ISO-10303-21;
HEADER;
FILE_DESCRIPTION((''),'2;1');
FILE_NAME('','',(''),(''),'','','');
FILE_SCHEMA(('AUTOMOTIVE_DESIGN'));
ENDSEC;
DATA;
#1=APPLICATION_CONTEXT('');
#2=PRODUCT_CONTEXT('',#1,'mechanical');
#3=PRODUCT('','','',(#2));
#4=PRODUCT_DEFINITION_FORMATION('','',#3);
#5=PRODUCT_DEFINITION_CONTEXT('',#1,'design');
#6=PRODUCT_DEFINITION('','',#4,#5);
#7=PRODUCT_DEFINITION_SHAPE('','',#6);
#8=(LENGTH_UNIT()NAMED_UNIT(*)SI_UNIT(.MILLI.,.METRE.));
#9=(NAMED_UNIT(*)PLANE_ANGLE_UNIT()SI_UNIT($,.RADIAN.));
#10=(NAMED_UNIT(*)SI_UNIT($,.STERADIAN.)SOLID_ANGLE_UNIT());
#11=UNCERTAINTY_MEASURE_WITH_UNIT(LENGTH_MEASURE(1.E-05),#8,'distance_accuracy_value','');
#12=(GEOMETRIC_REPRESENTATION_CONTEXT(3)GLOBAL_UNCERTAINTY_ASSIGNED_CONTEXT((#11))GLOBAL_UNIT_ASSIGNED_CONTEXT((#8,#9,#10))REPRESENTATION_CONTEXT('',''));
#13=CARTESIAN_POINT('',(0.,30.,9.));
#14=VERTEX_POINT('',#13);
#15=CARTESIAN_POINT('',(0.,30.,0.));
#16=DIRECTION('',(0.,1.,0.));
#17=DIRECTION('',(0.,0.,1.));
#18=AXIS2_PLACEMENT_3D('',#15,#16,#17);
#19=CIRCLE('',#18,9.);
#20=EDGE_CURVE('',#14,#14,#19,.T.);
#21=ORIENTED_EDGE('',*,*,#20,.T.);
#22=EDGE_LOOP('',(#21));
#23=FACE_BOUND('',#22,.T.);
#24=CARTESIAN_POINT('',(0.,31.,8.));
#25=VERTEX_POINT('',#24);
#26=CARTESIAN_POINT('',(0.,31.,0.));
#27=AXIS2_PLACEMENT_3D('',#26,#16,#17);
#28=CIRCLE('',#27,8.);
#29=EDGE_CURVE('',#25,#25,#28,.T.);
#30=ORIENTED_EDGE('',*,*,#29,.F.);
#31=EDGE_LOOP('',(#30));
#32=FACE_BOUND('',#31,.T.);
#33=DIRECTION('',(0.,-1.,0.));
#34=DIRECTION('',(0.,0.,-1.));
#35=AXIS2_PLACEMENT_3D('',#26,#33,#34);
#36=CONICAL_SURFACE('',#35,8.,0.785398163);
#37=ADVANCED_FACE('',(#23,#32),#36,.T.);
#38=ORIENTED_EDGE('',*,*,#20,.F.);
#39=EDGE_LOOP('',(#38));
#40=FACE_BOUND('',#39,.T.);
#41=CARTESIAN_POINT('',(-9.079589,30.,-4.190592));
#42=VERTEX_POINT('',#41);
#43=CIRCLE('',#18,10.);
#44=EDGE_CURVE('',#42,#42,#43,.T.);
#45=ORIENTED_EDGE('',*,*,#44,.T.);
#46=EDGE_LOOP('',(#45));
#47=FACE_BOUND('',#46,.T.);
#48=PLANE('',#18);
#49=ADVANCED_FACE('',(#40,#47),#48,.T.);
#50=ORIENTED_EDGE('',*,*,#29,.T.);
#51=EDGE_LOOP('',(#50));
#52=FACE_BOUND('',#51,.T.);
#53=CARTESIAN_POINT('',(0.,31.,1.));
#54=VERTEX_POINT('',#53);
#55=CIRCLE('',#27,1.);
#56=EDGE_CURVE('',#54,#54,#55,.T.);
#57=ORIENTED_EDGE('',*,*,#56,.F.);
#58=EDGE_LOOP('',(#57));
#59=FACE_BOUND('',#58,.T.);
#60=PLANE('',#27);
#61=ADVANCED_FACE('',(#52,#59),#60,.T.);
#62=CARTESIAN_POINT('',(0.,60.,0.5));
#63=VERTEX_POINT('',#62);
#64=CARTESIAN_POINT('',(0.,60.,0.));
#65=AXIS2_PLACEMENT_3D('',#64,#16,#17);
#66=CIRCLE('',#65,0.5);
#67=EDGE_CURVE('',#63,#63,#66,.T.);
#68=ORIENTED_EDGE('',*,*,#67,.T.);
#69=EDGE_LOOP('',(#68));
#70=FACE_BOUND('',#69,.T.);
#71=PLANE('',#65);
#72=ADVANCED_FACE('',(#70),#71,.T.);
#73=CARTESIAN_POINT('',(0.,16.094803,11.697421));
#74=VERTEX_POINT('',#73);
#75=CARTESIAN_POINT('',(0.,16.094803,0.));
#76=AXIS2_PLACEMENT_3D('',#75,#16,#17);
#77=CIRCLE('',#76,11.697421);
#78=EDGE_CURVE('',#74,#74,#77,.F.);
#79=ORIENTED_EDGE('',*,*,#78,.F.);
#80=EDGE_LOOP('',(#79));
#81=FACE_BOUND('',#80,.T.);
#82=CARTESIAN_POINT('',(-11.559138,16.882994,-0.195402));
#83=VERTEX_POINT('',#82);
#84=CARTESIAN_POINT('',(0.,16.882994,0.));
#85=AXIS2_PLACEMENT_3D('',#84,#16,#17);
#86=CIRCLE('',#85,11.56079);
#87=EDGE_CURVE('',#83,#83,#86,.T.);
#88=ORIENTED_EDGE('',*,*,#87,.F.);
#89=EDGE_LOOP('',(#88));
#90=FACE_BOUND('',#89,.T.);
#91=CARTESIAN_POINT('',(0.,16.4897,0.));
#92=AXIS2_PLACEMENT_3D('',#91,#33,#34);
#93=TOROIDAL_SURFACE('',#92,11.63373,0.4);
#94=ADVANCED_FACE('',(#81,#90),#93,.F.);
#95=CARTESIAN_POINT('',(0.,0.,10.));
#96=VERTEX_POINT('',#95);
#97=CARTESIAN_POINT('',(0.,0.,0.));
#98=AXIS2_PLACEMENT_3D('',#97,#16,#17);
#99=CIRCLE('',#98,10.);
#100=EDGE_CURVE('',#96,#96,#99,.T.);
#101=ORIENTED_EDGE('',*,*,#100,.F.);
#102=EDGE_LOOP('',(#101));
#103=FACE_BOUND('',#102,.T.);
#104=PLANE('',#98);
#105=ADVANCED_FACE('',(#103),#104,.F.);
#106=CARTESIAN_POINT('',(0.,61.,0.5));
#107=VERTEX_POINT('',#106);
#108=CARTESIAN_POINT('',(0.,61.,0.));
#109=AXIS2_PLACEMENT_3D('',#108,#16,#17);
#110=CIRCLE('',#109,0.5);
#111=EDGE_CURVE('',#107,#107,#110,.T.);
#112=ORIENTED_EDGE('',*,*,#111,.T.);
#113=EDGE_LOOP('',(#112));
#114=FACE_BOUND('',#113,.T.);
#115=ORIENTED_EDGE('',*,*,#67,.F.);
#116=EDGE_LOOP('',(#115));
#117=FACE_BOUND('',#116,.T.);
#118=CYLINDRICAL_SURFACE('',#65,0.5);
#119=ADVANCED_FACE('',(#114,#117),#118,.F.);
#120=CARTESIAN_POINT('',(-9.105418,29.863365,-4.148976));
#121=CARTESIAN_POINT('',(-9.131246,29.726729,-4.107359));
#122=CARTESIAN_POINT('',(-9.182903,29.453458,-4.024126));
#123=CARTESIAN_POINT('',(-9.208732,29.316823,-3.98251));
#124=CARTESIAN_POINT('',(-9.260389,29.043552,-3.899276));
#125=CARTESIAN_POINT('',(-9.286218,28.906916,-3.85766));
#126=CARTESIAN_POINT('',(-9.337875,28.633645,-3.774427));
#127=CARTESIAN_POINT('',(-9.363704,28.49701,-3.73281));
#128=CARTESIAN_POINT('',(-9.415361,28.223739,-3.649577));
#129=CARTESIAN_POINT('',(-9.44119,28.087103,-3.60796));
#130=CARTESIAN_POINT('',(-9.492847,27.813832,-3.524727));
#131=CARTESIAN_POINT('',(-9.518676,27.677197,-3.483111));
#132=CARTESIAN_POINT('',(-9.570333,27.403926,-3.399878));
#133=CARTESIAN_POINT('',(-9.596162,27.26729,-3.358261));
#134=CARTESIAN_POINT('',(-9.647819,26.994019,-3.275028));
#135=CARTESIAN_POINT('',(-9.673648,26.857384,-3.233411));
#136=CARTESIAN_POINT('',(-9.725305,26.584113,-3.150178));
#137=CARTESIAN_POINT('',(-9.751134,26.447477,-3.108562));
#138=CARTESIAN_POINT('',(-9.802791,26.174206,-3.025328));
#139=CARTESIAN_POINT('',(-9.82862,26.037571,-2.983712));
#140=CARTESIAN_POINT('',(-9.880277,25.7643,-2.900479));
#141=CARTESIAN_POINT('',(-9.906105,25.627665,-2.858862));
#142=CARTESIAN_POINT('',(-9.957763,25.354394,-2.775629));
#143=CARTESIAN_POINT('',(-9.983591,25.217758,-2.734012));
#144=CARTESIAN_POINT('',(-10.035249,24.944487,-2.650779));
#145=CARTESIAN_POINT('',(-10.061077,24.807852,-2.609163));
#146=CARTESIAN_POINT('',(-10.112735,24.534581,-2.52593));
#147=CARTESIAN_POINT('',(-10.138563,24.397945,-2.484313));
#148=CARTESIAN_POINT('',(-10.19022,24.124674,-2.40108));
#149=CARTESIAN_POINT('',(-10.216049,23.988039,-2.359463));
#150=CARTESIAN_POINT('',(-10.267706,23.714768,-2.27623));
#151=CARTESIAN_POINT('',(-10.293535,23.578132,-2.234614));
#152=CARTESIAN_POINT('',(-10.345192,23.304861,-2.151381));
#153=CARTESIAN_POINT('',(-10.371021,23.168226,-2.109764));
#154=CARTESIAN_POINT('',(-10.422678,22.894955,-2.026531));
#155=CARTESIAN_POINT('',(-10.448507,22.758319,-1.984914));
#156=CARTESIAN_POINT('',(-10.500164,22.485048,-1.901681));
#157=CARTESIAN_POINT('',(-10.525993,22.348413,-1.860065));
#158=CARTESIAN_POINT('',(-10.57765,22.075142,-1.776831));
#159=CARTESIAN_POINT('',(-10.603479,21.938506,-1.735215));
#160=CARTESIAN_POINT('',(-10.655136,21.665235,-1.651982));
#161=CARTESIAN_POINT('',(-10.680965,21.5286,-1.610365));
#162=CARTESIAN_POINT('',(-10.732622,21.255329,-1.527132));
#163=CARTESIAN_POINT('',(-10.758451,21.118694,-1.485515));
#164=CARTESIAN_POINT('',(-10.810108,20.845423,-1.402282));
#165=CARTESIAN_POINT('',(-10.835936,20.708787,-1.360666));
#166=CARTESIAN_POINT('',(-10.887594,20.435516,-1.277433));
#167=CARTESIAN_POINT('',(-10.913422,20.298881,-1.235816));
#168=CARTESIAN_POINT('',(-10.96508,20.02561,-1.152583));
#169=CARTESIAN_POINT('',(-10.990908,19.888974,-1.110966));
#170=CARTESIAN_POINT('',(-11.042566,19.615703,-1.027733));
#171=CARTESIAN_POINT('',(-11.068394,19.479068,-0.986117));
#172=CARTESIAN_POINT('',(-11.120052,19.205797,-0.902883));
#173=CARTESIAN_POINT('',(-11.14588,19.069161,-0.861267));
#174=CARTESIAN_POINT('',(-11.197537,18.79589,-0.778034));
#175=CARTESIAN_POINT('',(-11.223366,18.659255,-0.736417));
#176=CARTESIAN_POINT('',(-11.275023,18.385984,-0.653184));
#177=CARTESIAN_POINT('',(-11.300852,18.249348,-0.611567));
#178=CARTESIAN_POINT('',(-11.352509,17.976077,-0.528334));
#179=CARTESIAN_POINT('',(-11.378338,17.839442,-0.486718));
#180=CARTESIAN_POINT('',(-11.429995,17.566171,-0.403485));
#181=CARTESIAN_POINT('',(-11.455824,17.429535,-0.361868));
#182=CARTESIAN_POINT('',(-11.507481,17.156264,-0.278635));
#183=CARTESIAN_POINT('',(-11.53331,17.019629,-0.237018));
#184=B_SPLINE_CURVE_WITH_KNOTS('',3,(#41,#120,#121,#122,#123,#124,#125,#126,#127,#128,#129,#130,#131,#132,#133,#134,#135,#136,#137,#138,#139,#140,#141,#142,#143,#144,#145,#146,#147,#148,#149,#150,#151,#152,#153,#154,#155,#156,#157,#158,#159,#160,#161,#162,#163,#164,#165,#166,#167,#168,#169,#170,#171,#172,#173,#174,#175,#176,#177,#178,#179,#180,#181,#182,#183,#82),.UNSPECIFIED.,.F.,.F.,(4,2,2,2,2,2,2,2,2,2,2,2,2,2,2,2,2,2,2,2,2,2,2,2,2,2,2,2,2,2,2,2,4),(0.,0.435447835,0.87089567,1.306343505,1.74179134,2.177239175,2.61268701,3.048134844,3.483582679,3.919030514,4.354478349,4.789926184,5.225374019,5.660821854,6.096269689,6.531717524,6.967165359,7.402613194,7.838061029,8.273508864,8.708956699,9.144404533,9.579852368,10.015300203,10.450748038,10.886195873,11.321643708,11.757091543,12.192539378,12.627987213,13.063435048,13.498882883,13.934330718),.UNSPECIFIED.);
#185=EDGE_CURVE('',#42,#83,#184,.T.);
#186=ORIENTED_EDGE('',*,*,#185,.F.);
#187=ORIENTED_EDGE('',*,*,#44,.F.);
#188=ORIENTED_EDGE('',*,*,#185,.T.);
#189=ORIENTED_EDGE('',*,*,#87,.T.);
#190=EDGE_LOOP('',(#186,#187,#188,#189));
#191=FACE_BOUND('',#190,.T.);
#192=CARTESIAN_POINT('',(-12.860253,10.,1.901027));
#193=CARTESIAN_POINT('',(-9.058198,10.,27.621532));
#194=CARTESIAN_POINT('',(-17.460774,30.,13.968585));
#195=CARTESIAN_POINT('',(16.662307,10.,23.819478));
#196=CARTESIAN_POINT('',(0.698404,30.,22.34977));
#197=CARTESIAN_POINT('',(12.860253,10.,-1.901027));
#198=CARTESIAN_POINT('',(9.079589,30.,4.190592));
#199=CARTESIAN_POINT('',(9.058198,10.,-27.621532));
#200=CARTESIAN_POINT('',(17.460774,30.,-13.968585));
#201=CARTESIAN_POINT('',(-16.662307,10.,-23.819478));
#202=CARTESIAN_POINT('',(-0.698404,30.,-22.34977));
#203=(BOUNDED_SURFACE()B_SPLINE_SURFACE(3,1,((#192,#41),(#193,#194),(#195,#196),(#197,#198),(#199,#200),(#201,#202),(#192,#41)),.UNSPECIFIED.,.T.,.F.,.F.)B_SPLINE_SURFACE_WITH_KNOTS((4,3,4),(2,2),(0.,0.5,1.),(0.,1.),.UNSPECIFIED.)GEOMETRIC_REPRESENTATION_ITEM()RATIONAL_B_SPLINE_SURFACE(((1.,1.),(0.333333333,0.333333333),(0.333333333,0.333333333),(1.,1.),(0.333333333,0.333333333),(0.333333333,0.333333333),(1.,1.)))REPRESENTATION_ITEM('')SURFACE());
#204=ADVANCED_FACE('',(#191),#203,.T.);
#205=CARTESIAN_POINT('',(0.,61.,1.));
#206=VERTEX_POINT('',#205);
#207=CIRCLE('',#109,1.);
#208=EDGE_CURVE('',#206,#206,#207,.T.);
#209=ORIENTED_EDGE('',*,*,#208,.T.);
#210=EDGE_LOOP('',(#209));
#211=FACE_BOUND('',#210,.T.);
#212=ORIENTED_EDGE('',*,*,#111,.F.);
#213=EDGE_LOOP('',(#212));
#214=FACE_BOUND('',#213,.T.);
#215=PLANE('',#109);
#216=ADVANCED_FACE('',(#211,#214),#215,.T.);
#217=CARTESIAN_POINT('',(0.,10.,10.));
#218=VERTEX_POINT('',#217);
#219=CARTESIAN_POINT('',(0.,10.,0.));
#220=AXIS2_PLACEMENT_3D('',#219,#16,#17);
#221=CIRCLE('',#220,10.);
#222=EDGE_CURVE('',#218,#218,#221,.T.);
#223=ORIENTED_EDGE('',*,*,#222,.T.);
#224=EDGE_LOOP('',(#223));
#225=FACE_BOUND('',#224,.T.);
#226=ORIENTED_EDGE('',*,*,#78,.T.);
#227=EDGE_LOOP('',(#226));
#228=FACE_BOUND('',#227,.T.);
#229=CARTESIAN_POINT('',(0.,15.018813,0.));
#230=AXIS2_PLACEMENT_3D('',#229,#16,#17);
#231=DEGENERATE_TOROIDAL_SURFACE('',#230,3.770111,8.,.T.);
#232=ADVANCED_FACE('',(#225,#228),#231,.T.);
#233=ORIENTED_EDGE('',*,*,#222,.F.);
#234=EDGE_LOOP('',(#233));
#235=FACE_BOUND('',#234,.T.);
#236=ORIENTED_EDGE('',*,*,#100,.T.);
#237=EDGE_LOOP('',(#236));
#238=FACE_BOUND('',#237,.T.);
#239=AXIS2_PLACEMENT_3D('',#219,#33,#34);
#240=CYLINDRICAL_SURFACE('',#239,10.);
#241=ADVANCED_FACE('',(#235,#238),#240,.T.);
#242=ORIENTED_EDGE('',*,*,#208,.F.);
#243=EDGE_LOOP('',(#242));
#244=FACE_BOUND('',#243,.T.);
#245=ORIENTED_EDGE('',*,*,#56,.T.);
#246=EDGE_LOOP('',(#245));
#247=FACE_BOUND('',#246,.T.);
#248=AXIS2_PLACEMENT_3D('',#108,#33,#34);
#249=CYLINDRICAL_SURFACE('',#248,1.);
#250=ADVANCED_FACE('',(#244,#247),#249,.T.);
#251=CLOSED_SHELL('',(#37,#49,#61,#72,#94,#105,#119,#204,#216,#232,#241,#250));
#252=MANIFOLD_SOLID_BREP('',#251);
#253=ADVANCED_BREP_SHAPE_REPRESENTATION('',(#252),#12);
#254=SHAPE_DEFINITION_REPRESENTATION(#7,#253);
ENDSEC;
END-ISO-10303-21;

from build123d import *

# Parameters (mm, degrees)
SKETCH2_R           = 10
BOSS_EXTRUDE1_DEPTH = 10
FILLET1_R           = 8
SKETCH5_R           = 0.4
SKETCH6_R           = 9
BOSS_EXTRUDE2_DEPTH = 1
CHAMFER1_SIZE       = 1
SKETCH7_R           = 1
BOSS_EXTRUDE3_DEPTH = 30
SKETCH8_R           = 0.5
CUT_EXTRUDE1_DEPTH  = 1


with BuildPart() as part:
    # Sketch2 → Boss-Extrude1 (new body)
    with BuildSketch(Plane(origin=(0, 0, 0), x_dir=(1, 0, 0), z_dir=(0, 1, 0))):
        with Locations(Location((0, 0, 0), (0, 0, 270))):
            Circle(SKETCH2_R)
    extrude(amount=BOSS_EXTRUDE1_DEPTH)

    # Loft1: read off the stored shape, not the designer's step
    # Loft1: loft between two sections, ruled curve by curve
    loft1_from = [
        Edge.make_bspline([(-12.860252555, 10, 1.901027147), (-9.058198262, 10, 27.621532257), (16.662306849, 10, 23.819477964), (12.860252555, 10, -1.901027147), (9.058198262, 10, -27.621532257), (-16.662306849, 10, -23.819477964), (-12.860252555, 10, 1.901027147)], [0, 0, 0, 0, 0.5, 0.5, 0.5, 1, 1, 1, 1], 3, [1, 0.333333333, 0.333333333, 1, 0.333333333, 0.333333333, 1]),
    ]
    loft1_to = [
        Edge.make_bspline([(-9.079588938, 30, -4.190592406), (-17.460773749, 30, 13.968585471), (0.698404127, 30, 22.349770282), (9.079588938, 30, 4.190592406), (17.460773749, 30, -13.968585471), (-0.698404127, 30, -22.349770282), (-9.079588938, 30, -4.190592406)], [0, 0, 0, 0, 0.5, 0.5, 0.5, 1, 1, 1, 1], 3, [1, 0.333333333, 0.333333333, 1, 0.333333333, 0.333333333, 1]),
    ]
    loft1 = Solid(Shell([*[Face.make_surface_from_curves(loft1_from[k], loft1_to[k]) for k in range(1)], Face(Wire(loft1_from)), Face(Wire(loft1_to))]))
    add(loft1)

    # Fillet1
    # the kernel refuses this fillet: 8 mm, written as the material it takes off along each edge
    with BuildSketch(Plane(origin=(0, 10, 0), x_dir=(-0.9892501965607676, 0, 0.14623285747219308), z_dir=(-0.14623285747219308, 0, -0.9892501965607676))) as fillet1_piece_1:
        with BuildLine():
            CenterArc((3.770111358, 5.018813356), FILLET1_R, 321.144997334, 49.449726364)
            Line((10, 0), (10.124597773, -0.100376267))
            ThreePointArc((10.124597773, -0.100376267), (11.5, -0.16), (13, -0.16))
            Line((13, -0.16), (13.155876196, 0.036091708))
            ThreePointArc((13.155876196, 0.036091708), (12.43891649, 3.270626899), (11.791002002, 6.519117749))
            Line((11.791002002, 6.519117749), (11.633729636, 6.489700016))
        make_face()
    revolve(axis=Axis((0, 10, 0), (0, 1, 0)), mode=Mode.SUBTRACT)

    # Sketch5 → Cut-Revolve1 (revolve, cut)
    with BuildSketch(Plane(origin=(0, 0, 0), x_dir=(0, 0, -1), z_dir=(1, 0, 0))):
        with Locations((-11.633729637, 16.489700016)):
            Circle(SKETCH5_R)
    revolve(axis=Axis((0, 16.489700016, 0), (0, 1, 0)), mode=Mode.SUBTRACT)

    # Sketch6 → Boss-Extrude2 (add)
    with BuildSketch(Plane(origin=(0, 30, 0), x_dir=(1, 0, 0), z_dir=(0, 1, 0))):
        with Locations(Location((0, 0, 0), (0, 0, 270))):
            Circle(SKETCH6_R)
    extrude(amount=BOSS_EXTRUDE2_DEPTH)

    # Chamfer1
    chamfer1_edges = [part.edges().sort_by_distance(p)[0] for p in [
        (0, 31, -9),
    ]]
    chamfer(chamfer1_edges, length=CHAMFER1_SIZE - 0.0001)  # a hair under: the kernel refuses the full size

    # Sketch7 → Boss-Extrude3 (add)
    with BuildSketch(Plane(origin=(0, 31, 0), x_dir=(1, 0, 0), z_dir=(0, 1, 0))):
        with Locations(Location((0, 0, 0), (0, 0, 270))):
            Circle(SKETCH7_R)
    extrude(amount=BOSS_EXTRUDE3_DEPTH)

    # Sketch8 → Cut-Extrude1 (cut)
    with BuildSketch(Plane(origin=(0, 61, 0), x_dir=(1, 0, 0), z_dir=(0, 1, 0))):
        with Locations(Location((0, 0, 0), (0, 0, 270))):
            Circle(SKETCH8_R)
    extrude(amount=-CUT_EXTRUDE1_DEPTH, mode=Mode.SUBTRACT)


solid = part.part
